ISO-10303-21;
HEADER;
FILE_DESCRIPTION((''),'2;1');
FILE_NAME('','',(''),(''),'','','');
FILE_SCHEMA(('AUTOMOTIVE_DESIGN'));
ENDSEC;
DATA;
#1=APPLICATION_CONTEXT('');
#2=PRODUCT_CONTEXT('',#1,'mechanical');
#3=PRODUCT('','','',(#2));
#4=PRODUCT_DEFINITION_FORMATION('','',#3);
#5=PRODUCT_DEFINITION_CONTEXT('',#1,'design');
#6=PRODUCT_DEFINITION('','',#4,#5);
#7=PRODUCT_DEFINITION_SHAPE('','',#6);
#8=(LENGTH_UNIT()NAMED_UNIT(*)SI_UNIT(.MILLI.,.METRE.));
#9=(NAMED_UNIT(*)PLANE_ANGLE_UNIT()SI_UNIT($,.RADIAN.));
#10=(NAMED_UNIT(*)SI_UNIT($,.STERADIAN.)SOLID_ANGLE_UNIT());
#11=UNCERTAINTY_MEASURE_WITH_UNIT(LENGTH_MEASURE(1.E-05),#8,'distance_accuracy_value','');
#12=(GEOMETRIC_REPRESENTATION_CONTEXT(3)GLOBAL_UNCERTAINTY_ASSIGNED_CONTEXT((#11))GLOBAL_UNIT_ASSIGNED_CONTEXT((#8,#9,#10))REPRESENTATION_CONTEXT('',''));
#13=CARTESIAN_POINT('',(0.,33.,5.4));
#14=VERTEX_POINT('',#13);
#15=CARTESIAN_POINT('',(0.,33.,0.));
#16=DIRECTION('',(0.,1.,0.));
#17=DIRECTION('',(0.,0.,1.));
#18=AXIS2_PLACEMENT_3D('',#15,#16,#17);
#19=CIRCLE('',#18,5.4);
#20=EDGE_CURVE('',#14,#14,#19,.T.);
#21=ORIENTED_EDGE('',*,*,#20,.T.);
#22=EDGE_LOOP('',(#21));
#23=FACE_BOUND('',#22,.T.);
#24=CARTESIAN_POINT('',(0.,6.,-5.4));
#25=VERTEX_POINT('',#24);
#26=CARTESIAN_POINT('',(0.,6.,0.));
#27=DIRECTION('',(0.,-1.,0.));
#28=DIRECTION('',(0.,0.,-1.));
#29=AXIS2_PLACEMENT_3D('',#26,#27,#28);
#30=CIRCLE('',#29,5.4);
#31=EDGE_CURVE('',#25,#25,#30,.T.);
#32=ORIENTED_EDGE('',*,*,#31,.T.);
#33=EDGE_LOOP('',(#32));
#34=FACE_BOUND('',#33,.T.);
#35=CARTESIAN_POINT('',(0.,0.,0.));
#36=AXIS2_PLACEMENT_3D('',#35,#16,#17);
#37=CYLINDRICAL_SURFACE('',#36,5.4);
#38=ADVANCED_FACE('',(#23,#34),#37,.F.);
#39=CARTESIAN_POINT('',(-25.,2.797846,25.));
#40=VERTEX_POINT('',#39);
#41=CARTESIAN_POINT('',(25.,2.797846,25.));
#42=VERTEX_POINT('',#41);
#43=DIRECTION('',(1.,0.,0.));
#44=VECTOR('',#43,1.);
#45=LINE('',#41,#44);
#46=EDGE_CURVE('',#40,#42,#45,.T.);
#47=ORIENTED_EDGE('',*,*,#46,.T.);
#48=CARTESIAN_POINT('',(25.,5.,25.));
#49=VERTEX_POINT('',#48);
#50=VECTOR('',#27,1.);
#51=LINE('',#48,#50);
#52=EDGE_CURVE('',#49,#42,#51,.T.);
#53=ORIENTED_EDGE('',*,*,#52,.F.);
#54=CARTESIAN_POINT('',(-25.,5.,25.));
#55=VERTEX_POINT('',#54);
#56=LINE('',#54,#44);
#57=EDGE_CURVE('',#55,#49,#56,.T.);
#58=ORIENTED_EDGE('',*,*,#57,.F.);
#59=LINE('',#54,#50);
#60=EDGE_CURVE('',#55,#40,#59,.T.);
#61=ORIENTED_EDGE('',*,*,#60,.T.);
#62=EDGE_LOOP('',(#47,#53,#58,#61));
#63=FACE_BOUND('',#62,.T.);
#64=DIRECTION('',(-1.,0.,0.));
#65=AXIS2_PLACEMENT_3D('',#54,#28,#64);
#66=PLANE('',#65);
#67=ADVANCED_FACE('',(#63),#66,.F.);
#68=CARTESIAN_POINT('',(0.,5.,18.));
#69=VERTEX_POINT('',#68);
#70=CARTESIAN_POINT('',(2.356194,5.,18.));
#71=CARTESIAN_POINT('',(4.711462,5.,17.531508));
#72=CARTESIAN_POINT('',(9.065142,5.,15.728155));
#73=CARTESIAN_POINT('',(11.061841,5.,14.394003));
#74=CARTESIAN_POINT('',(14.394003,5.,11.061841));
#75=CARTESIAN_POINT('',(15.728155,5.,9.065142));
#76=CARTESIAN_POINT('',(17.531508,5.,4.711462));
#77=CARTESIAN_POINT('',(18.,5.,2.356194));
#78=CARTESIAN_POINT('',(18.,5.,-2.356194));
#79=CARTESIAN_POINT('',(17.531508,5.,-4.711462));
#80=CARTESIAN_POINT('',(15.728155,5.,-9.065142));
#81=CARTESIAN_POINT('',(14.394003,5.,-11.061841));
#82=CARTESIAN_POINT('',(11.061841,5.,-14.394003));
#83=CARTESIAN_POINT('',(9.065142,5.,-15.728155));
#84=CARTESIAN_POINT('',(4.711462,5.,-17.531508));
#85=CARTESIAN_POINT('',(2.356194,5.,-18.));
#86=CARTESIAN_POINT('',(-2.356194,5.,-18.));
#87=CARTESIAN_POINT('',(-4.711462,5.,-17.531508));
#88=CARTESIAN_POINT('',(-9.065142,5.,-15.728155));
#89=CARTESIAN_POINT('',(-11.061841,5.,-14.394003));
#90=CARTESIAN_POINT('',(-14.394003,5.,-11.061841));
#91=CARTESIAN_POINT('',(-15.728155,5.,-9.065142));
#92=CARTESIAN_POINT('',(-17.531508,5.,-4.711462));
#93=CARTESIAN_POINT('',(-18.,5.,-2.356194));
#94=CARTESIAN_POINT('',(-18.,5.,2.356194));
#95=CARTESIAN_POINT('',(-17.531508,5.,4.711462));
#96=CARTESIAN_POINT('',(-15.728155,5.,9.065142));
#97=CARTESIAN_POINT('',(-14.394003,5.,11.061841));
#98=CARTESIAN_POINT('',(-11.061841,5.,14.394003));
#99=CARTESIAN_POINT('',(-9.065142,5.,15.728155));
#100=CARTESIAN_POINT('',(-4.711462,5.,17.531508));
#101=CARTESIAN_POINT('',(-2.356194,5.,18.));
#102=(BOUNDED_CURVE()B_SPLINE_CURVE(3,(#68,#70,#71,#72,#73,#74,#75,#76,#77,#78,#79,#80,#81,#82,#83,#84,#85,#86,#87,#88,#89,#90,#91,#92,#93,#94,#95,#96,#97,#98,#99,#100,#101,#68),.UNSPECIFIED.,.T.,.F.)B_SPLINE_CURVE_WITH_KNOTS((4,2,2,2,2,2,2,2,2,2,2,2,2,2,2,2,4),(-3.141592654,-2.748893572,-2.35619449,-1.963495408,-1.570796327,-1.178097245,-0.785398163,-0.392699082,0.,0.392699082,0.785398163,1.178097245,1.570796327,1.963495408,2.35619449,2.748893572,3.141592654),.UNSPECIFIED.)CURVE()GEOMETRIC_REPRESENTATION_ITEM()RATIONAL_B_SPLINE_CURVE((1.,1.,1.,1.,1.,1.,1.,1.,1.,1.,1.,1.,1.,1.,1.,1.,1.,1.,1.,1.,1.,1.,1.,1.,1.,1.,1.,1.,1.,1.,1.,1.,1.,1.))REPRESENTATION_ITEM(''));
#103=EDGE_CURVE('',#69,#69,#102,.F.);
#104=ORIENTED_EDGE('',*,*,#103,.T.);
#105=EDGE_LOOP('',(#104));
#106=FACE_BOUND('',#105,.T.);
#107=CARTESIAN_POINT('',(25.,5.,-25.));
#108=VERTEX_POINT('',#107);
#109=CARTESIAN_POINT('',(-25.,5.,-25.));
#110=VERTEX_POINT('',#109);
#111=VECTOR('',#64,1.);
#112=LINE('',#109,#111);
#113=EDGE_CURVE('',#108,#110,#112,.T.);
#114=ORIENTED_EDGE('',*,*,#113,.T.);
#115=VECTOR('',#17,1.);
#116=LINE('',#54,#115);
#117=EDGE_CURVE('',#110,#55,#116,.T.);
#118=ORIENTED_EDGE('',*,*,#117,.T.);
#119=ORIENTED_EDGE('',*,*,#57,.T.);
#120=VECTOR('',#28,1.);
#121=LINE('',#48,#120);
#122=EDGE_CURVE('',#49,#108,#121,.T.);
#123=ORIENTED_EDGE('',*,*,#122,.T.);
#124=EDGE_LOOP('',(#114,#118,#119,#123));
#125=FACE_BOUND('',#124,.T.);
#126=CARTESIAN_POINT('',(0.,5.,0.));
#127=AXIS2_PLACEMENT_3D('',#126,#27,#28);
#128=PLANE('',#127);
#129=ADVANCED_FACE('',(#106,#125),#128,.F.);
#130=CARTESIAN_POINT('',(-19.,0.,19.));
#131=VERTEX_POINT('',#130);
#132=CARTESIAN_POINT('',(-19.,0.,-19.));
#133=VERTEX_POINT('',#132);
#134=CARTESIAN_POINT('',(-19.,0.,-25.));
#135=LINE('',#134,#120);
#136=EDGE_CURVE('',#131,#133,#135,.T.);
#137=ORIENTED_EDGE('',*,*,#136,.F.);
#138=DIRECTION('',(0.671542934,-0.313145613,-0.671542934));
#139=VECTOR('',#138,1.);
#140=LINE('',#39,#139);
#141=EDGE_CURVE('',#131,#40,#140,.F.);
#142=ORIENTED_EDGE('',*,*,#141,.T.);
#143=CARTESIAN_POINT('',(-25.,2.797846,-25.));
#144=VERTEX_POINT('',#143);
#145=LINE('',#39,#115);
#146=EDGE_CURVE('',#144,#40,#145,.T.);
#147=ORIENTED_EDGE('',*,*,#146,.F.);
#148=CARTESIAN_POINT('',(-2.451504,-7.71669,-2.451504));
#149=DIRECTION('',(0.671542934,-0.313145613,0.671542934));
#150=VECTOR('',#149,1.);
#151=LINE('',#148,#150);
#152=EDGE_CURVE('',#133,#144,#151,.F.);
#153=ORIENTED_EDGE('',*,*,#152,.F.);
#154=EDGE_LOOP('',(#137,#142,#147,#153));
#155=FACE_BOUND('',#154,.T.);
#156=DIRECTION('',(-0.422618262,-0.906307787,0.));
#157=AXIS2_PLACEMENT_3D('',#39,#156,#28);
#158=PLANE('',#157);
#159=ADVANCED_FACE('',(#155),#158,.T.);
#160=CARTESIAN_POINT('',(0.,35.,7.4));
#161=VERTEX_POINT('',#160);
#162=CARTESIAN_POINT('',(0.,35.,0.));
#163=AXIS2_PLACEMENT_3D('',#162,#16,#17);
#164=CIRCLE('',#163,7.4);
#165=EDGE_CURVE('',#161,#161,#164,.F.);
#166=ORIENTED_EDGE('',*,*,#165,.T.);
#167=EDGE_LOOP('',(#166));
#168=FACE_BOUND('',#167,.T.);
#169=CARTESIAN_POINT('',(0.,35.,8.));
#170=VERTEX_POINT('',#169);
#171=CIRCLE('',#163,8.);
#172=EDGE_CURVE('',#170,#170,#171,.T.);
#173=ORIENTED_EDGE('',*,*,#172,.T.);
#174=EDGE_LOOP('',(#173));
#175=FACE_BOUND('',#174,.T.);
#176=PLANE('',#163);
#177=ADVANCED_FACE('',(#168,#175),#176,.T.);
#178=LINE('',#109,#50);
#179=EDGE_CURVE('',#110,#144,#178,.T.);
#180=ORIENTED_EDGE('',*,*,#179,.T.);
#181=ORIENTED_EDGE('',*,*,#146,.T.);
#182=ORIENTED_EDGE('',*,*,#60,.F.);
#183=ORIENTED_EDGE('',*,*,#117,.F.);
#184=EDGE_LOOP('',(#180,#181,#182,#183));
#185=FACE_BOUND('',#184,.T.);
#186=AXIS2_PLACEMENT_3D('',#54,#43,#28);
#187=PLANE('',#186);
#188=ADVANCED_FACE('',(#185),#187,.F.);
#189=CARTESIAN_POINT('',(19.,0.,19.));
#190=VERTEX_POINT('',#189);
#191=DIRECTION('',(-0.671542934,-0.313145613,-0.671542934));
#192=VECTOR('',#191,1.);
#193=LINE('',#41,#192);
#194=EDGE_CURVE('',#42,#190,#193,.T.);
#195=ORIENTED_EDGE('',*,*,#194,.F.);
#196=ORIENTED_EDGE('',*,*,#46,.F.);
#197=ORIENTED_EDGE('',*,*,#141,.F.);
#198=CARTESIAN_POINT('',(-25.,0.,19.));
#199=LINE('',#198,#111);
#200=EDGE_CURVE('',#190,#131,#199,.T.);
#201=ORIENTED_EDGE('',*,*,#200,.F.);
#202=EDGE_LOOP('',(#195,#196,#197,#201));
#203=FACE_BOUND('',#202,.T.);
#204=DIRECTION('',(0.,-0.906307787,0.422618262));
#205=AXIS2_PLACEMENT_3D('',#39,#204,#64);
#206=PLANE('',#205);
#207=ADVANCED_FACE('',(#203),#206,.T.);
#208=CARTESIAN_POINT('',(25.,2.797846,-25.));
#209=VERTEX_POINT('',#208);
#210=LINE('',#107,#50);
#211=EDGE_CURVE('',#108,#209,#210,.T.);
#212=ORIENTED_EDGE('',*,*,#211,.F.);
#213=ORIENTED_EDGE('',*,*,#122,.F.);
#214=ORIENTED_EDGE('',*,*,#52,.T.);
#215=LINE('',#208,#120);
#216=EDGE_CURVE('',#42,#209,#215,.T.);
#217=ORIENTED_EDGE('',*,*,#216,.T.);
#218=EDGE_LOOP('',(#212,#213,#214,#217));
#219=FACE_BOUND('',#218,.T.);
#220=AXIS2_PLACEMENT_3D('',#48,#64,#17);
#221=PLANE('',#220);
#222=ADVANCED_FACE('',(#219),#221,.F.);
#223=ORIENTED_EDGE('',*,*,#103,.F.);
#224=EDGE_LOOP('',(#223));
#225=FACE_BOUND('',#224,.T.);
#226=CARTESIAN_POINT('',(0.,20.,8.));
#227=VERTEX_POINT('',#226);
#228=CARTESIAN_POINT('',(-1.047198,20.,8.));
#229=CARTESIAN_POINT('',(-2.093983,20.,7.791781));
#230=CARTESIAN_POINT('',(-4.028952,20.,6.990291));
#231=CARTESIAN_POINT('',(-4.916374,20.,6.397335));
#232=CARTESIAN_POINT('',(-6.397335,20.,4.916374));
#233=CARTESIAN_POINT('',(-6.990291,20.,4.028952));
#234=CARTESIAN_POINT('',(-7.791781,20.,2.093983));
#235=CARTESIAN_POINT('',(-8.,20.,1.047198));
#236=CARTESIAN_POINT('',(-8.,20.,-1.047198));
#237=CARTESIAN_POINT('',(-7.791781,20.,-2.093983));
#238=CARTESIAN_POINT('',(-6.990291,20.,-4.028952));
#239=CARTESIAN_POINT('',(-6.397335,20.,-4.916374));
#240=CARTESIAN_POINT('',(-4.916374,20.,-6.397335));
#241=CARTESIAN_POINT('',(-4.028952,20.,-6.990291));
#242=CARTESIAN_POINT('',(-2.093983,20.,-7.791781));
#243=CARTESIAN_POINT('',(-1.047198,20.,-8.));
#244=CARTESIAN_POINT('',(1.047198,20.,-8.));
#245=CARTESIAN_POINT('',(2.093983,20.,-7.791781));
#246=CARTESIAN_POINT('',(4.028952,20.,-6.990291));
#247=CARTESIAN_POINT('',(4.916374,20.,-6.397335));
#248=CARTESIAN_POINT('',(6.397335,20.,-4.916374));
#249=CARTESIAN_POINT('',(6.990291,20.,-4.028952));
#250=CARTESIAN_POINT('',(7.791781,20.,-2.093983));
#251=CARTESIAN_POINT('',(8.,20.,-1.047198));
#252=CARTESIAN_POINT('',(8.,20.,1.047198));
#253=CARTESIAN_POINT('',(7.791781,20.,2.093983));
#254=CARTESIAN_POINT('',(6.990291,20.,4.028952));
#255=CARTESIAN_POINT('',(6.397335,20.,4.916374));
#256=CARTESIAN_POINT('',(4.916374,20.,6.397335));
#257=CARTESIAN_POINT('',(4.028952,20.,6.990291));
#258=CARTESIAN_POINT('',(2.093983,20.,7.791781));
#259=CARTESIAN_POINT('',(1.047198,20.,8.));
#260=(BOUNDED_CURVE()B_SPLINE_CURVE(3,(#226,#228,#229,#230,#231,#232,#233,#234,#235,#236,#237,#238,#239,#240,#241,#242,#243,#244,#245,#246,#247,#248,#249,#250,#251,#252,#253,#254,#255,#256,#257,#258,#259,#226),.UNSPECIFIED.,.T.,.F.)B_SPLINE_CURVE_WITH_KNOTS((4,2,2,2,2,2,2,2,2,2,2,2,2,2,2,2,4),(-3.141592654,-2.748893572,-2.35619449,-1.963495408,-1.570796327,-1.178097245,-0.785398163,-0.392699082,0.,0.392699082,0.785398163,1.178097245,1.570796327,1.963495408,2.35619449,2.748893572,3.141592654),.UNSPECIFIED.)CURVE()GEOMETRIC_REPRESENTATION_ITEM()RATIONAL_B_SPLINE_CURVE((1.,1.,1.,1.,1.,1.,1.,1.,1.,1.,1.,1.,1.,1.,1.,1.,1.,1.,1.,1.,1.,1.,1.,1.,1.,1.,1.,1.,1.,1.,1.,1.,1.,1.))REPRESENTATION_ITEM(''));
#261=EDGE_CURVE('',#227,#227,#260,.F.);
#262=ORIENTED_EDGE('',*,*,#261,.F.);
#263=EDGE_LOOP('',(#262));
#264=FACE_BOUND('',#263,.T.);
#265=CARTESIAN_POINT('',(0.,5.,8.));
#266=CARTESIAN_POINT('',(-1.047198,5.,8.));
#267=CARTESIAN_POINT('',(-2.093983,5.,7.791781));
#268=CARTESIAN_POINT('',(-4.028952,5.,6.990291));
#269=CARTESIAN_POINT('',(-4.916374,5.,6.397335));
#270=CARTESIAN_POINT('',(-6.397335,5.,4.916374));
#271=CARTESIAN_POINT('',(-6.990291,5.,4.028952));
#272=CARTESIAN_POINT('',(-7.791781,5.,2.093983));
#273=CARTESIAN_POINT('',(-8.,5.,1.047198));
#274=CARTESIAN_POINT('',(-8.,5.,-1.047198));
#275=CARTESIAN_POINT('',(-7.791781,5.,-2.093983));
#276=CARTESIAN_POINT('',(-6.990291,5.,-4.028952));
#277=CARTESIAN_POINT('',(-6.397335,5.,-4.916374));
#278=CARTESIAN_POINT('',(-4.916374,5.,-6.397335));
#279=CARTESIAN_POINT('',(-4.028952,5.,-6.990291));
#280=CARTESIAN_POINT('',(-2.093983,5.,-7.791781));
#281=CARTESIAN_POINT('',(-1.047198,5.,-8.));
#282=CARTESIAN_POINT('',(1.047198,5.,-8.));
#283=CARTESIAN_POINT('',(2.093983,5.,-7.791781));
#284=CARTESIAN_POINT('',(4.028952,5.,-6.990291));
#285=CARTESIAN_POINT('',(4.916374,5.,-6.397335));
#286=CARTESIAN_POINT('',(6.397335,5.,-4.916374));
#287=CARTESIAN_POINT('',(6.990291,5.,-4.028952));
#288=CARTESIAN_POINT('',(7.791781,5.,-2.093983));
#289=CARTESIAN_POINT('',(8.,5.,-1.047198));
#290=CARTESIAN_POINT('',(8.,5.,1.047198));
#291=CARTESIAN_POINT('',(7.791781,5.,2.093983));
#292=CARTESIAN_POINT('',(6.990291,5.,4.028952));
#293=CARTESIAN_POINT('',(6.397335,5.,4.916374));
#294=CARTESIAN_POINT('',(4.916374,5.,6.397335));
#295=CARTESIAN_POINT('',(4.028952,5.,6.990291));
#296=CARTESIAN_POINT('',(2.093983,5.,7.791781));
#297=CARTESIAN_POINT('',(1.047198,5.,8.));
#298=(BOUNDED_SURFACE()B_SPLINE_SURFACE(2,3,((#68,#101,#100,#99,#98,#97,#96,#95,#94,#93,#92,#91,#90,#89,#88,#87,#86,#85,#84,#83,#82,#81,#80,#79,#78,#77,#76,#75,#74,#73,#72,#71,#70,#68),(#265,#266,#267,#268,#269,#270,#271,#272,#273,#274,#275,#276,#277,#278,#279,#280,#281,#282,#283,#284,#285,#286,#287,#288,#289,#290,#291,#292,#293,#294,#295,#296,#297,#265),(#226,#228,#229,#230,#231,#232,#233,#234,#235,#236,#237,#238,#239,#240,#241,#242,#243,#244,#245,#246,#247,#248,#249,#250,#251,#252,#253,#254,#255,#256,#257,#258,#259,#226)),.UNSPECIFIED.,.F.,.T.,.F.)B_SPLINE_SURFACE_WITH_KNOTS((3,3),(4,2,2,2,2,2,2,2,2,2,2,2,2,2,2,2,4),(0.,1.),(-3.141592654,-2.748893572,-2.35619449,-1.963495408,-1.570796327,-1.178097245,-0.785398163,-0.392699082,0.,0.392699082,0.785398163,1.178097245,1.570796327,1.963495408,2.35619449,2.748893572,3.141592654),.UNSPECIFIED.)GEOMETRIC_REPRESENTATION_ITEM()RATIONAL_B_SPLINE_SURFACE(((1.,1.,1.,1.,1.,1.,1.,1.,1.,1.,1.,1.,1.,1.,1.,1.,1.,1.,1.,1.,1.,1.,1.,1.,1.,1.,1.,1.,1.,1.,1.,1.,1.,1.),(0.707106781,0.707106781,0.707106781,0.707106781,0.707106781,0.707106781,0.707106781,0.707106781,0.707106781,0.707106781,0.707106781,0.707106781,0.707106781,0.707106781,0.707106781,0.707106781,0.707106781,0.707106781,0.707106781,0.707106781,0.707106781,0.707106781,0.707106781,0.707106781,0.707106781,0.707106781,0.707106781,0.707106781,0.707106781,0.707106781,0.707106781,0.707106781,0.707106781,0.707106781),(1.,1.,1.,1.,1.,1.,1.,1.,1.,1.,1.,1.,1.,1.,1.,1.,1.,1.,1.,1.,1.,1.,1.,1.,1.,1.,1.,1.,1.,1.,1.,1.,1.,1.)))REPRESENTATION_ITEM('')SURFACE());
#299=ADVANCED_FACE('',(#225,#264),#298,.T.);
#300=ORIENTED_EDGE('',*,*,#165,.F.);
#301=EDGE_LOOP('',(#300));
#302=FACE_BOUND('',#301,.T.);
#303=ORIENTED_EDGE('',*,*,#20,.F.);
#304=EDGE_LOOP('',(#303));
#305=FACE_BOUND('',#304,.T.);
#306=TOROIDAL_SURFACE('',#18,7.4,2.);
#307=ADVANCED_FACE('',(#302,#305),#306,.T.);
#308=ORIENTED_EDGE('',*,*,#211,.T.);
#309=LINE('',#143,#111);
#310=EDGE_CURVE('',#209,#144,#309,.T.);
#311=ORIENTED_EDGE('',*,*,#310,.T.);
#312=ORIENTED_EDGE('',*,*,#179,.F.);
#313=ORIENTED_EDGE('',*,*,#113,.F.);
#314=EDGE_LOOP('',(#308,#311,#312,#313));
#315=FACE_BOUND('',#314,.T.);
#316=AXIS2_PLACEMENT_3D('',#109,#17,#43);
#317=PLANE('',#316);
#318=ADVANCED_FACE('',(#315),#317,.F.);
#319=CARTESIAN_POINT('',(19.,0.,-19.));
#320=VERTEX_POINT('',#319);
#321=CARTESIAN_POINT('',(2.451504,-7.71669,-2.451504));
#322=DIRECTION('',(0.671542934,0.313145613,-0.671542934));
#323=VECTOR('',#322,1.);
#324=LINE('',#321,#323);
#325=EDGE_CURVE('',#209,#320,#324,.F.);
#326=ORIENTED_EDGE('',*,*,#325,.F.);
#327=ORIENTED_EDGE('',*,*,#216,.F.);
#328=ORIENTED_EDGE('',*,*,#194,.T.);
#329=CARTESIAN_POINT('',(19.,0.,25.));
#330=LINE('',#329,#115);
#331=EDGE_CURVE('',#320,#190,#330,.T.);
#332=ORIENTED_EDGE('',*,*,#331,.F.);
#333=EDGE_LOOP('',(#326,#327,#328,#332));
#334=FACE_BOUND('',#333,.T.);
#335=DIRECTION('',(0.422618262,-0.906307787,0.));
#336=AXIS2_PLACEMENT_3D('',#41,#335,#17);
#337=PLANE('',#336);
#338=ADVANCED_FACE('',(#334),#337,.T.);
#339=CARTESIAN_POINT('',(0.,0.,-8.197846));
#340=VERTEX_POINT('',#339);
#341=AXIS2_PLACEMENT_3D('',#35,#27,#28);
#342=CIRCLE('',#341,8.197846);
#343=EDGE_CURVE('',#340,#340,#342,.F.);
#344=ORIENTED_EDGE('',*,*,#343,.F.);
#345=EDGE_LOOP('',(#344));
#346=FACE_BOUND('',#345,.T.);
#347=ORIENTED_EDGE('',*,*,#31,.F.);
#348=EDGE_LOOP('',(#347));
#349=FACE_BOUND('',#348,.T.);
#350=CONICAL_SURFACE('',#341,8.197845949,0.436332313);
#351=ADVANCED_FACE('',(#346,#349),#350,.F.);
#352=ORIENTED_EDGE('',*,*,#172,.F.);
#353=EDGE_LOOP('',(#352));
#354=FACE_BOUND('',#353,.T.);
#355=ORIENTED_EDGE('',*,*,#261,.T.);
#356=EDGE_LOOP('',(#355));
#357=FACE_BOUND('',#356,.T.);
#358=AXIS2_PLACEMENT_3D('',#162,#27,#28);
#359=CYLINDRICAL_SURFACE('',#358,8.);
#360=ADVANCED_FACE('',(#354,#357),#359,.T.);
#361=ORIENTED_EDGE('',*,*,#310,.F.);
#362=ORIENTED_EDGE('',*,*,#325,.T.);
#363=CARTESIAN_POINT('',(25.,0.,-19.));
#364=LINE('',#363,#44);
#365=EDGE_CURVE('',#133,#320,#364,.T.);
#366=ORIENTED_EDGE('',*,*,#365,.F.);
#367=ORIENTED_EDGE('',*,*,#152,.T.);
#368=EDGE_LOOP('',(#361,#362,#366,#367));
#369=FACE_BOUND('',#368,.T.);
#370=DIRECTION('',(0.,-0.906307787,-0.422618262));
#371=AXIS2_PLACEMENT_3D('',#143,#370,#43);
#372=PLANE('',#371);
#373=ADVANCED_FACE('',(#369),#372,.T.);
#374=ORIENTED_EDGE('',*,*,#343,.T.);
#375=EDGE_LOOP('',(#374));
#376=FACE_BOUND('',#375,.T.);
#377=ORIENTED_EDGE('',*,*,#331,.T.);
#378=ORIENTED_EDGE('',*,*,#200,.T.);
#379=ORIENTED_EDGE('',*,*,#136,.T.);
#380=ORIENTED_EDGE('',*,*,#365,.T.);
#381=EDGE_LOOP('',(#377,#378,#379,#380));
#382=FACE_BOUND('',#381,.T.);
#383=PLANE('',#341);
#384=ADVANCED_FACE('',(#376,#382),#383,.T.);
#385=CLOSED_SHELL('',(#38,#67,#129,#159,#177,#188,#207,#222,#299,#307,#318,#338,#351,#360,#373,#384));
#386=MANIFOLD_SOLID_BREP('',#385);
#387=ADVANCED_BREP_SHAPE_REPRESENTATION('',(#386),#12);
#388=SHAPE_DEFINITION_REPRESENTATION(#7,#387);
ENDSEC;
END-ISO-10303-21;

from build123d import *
from OCP.BRepFilletAPI import BRepFilletAPI_MakeChamfer

# Parameters (mm, degrees)
SKETCH_1_W          = 50
SKETCH_1_H          = 50
EXTRUDE_1_DEPTH     = 5
SKETCH_5_R          = 8
EXTRUDE_3_DEPTH     = 30
SKETCH_6_R          = 5.4
CUT_EXTRUDE_2_DEPTH = 50.749371855
FILLET_3_R          = 2
FILLET_2_SIZE       = 15
FILLET_2_SIZE_2     = 10
CHAMFER_1_SIZE      = 6
CHAMFER_1_SIZE2     = 2.797845949


with BuildPart() as part:
    # Эскиз1 → Бобышка-Вытянуть1 (new body)
    with BuildSketch(Plane(origin=(0, 0, 0), x_dir=(1, 0, 0), z_dir=(0, 1, 0))):
        Rectangle(SKETCH_1_W, SKETCH_1_H)
    extrude(amount=EXTRUDE_1_DEPTH)

    # Эскиз5 → Бобышка-Вытянуть3 (add)
    with BuildSketch(Plane(origin=(0, 5, 0), x_dir=(1, 0, 0), z_dir=(0, 1, 0))):
        with Locations(Location((0, 0, 0), (0, 0, 270))):
            Circle(SKETCH_5_R)
    extrude(amount=EXTRUDE_3_DEPTH)

    # Эскиз6 → Вырез-Вытянуть2 (cut, through all)
    with BuildSketch(Plane(origin=(0, 35, 0), x_dir=(1, 0, 0), z_dir=(0, 1, 0))):
        with Locations(Location((0, 0, 0), (0, 0, 270))):
            Circle(SKETCH_6_R)
    extrude(amount=-CUT_EXTRUDE_2_DEPTH, mode=Mode.SUBTRACT)

    # Скругление3
    fillet_3_edges = [part.edges().sort_by_distance(p)[0] for p in [
        (0, 35, -5.4),
    ]]
    fillet(fillet_3_edges, radius=FILLET_3_R)

    # Скругление2
    # an asymmetric fillet: 15, 10 mm, written as the material it adds along each edge
    with BuildSketch(Plane(origin=(0, 5, 0), x_dir=(0, 0, 1), z_dir=(-1, 0, 0))) as fillet_2_piece_1:
        with BuildLine():
            Bezier((8, FILLET_2_SIZE), (8, 0), (8 + FILLET_2_SIZE_2, 0), weights=[1, 0.707106781, 1])
            Line((8 + FILLET_2_SIZE_2, 0), (8, 0))
            Line((8, 0), (8, FILLET_2_SIZE))
        make_face()
    revolve(axis=Axis((0, 5, 0), (0, 1, 0)))

    # Фаска1: one chamfer whose edges measure the first distance from different faces: ONE call of the kernel's chamfer builder (chamfer() names one face for all edges)
    chamfer_1_edges_1 = [part.edges().sort_by_distance(p)[0] for p in [
        (0, 0, -5.4),
    ]]
    chamfer_1_side_1 = [part.faces().sort_by_distance(p)[0] for p in [
        (0, 16.5, -5.4),
    ]]
    chamfer_1_edges_2 = [part.edges().sort_by_distance(p)[0] for p in [
        (0, 0, 25),
        (-25, 0, 0),
        (0, 0, -25),
        (25, 0, 0),
    ]]
    chamfer_1_side_2 = [part.faces().sort_by_distance(p)[0] for p in [
        (0, 0, 24.292893219),
    ]]
    chamfer_1 = BRepFilletAPI_MakeChamfer(part.part.solid().wrapped)
    for e in chamfer_1_edges_1:
        chamfer_1.Add(CHAMFER_1_SIZE, CHAMFER_1_SIZE2, e.wrapped, chamfer_1_side_1[0].wrapped)  # the first distance lies on this face
    for e in chamfer_1_edges_2:
        chamfer_1.Add(CHAMFER_1_SIZE, CHAMFER_1_SIZE2, e.wrapped, chamfer_1_side_2[0].wrapped)  # the first distance lies on this face
    add(Compound.cast(chamfer_1.Shape()), mode=Mode.REPLACE)


solid = part.part
